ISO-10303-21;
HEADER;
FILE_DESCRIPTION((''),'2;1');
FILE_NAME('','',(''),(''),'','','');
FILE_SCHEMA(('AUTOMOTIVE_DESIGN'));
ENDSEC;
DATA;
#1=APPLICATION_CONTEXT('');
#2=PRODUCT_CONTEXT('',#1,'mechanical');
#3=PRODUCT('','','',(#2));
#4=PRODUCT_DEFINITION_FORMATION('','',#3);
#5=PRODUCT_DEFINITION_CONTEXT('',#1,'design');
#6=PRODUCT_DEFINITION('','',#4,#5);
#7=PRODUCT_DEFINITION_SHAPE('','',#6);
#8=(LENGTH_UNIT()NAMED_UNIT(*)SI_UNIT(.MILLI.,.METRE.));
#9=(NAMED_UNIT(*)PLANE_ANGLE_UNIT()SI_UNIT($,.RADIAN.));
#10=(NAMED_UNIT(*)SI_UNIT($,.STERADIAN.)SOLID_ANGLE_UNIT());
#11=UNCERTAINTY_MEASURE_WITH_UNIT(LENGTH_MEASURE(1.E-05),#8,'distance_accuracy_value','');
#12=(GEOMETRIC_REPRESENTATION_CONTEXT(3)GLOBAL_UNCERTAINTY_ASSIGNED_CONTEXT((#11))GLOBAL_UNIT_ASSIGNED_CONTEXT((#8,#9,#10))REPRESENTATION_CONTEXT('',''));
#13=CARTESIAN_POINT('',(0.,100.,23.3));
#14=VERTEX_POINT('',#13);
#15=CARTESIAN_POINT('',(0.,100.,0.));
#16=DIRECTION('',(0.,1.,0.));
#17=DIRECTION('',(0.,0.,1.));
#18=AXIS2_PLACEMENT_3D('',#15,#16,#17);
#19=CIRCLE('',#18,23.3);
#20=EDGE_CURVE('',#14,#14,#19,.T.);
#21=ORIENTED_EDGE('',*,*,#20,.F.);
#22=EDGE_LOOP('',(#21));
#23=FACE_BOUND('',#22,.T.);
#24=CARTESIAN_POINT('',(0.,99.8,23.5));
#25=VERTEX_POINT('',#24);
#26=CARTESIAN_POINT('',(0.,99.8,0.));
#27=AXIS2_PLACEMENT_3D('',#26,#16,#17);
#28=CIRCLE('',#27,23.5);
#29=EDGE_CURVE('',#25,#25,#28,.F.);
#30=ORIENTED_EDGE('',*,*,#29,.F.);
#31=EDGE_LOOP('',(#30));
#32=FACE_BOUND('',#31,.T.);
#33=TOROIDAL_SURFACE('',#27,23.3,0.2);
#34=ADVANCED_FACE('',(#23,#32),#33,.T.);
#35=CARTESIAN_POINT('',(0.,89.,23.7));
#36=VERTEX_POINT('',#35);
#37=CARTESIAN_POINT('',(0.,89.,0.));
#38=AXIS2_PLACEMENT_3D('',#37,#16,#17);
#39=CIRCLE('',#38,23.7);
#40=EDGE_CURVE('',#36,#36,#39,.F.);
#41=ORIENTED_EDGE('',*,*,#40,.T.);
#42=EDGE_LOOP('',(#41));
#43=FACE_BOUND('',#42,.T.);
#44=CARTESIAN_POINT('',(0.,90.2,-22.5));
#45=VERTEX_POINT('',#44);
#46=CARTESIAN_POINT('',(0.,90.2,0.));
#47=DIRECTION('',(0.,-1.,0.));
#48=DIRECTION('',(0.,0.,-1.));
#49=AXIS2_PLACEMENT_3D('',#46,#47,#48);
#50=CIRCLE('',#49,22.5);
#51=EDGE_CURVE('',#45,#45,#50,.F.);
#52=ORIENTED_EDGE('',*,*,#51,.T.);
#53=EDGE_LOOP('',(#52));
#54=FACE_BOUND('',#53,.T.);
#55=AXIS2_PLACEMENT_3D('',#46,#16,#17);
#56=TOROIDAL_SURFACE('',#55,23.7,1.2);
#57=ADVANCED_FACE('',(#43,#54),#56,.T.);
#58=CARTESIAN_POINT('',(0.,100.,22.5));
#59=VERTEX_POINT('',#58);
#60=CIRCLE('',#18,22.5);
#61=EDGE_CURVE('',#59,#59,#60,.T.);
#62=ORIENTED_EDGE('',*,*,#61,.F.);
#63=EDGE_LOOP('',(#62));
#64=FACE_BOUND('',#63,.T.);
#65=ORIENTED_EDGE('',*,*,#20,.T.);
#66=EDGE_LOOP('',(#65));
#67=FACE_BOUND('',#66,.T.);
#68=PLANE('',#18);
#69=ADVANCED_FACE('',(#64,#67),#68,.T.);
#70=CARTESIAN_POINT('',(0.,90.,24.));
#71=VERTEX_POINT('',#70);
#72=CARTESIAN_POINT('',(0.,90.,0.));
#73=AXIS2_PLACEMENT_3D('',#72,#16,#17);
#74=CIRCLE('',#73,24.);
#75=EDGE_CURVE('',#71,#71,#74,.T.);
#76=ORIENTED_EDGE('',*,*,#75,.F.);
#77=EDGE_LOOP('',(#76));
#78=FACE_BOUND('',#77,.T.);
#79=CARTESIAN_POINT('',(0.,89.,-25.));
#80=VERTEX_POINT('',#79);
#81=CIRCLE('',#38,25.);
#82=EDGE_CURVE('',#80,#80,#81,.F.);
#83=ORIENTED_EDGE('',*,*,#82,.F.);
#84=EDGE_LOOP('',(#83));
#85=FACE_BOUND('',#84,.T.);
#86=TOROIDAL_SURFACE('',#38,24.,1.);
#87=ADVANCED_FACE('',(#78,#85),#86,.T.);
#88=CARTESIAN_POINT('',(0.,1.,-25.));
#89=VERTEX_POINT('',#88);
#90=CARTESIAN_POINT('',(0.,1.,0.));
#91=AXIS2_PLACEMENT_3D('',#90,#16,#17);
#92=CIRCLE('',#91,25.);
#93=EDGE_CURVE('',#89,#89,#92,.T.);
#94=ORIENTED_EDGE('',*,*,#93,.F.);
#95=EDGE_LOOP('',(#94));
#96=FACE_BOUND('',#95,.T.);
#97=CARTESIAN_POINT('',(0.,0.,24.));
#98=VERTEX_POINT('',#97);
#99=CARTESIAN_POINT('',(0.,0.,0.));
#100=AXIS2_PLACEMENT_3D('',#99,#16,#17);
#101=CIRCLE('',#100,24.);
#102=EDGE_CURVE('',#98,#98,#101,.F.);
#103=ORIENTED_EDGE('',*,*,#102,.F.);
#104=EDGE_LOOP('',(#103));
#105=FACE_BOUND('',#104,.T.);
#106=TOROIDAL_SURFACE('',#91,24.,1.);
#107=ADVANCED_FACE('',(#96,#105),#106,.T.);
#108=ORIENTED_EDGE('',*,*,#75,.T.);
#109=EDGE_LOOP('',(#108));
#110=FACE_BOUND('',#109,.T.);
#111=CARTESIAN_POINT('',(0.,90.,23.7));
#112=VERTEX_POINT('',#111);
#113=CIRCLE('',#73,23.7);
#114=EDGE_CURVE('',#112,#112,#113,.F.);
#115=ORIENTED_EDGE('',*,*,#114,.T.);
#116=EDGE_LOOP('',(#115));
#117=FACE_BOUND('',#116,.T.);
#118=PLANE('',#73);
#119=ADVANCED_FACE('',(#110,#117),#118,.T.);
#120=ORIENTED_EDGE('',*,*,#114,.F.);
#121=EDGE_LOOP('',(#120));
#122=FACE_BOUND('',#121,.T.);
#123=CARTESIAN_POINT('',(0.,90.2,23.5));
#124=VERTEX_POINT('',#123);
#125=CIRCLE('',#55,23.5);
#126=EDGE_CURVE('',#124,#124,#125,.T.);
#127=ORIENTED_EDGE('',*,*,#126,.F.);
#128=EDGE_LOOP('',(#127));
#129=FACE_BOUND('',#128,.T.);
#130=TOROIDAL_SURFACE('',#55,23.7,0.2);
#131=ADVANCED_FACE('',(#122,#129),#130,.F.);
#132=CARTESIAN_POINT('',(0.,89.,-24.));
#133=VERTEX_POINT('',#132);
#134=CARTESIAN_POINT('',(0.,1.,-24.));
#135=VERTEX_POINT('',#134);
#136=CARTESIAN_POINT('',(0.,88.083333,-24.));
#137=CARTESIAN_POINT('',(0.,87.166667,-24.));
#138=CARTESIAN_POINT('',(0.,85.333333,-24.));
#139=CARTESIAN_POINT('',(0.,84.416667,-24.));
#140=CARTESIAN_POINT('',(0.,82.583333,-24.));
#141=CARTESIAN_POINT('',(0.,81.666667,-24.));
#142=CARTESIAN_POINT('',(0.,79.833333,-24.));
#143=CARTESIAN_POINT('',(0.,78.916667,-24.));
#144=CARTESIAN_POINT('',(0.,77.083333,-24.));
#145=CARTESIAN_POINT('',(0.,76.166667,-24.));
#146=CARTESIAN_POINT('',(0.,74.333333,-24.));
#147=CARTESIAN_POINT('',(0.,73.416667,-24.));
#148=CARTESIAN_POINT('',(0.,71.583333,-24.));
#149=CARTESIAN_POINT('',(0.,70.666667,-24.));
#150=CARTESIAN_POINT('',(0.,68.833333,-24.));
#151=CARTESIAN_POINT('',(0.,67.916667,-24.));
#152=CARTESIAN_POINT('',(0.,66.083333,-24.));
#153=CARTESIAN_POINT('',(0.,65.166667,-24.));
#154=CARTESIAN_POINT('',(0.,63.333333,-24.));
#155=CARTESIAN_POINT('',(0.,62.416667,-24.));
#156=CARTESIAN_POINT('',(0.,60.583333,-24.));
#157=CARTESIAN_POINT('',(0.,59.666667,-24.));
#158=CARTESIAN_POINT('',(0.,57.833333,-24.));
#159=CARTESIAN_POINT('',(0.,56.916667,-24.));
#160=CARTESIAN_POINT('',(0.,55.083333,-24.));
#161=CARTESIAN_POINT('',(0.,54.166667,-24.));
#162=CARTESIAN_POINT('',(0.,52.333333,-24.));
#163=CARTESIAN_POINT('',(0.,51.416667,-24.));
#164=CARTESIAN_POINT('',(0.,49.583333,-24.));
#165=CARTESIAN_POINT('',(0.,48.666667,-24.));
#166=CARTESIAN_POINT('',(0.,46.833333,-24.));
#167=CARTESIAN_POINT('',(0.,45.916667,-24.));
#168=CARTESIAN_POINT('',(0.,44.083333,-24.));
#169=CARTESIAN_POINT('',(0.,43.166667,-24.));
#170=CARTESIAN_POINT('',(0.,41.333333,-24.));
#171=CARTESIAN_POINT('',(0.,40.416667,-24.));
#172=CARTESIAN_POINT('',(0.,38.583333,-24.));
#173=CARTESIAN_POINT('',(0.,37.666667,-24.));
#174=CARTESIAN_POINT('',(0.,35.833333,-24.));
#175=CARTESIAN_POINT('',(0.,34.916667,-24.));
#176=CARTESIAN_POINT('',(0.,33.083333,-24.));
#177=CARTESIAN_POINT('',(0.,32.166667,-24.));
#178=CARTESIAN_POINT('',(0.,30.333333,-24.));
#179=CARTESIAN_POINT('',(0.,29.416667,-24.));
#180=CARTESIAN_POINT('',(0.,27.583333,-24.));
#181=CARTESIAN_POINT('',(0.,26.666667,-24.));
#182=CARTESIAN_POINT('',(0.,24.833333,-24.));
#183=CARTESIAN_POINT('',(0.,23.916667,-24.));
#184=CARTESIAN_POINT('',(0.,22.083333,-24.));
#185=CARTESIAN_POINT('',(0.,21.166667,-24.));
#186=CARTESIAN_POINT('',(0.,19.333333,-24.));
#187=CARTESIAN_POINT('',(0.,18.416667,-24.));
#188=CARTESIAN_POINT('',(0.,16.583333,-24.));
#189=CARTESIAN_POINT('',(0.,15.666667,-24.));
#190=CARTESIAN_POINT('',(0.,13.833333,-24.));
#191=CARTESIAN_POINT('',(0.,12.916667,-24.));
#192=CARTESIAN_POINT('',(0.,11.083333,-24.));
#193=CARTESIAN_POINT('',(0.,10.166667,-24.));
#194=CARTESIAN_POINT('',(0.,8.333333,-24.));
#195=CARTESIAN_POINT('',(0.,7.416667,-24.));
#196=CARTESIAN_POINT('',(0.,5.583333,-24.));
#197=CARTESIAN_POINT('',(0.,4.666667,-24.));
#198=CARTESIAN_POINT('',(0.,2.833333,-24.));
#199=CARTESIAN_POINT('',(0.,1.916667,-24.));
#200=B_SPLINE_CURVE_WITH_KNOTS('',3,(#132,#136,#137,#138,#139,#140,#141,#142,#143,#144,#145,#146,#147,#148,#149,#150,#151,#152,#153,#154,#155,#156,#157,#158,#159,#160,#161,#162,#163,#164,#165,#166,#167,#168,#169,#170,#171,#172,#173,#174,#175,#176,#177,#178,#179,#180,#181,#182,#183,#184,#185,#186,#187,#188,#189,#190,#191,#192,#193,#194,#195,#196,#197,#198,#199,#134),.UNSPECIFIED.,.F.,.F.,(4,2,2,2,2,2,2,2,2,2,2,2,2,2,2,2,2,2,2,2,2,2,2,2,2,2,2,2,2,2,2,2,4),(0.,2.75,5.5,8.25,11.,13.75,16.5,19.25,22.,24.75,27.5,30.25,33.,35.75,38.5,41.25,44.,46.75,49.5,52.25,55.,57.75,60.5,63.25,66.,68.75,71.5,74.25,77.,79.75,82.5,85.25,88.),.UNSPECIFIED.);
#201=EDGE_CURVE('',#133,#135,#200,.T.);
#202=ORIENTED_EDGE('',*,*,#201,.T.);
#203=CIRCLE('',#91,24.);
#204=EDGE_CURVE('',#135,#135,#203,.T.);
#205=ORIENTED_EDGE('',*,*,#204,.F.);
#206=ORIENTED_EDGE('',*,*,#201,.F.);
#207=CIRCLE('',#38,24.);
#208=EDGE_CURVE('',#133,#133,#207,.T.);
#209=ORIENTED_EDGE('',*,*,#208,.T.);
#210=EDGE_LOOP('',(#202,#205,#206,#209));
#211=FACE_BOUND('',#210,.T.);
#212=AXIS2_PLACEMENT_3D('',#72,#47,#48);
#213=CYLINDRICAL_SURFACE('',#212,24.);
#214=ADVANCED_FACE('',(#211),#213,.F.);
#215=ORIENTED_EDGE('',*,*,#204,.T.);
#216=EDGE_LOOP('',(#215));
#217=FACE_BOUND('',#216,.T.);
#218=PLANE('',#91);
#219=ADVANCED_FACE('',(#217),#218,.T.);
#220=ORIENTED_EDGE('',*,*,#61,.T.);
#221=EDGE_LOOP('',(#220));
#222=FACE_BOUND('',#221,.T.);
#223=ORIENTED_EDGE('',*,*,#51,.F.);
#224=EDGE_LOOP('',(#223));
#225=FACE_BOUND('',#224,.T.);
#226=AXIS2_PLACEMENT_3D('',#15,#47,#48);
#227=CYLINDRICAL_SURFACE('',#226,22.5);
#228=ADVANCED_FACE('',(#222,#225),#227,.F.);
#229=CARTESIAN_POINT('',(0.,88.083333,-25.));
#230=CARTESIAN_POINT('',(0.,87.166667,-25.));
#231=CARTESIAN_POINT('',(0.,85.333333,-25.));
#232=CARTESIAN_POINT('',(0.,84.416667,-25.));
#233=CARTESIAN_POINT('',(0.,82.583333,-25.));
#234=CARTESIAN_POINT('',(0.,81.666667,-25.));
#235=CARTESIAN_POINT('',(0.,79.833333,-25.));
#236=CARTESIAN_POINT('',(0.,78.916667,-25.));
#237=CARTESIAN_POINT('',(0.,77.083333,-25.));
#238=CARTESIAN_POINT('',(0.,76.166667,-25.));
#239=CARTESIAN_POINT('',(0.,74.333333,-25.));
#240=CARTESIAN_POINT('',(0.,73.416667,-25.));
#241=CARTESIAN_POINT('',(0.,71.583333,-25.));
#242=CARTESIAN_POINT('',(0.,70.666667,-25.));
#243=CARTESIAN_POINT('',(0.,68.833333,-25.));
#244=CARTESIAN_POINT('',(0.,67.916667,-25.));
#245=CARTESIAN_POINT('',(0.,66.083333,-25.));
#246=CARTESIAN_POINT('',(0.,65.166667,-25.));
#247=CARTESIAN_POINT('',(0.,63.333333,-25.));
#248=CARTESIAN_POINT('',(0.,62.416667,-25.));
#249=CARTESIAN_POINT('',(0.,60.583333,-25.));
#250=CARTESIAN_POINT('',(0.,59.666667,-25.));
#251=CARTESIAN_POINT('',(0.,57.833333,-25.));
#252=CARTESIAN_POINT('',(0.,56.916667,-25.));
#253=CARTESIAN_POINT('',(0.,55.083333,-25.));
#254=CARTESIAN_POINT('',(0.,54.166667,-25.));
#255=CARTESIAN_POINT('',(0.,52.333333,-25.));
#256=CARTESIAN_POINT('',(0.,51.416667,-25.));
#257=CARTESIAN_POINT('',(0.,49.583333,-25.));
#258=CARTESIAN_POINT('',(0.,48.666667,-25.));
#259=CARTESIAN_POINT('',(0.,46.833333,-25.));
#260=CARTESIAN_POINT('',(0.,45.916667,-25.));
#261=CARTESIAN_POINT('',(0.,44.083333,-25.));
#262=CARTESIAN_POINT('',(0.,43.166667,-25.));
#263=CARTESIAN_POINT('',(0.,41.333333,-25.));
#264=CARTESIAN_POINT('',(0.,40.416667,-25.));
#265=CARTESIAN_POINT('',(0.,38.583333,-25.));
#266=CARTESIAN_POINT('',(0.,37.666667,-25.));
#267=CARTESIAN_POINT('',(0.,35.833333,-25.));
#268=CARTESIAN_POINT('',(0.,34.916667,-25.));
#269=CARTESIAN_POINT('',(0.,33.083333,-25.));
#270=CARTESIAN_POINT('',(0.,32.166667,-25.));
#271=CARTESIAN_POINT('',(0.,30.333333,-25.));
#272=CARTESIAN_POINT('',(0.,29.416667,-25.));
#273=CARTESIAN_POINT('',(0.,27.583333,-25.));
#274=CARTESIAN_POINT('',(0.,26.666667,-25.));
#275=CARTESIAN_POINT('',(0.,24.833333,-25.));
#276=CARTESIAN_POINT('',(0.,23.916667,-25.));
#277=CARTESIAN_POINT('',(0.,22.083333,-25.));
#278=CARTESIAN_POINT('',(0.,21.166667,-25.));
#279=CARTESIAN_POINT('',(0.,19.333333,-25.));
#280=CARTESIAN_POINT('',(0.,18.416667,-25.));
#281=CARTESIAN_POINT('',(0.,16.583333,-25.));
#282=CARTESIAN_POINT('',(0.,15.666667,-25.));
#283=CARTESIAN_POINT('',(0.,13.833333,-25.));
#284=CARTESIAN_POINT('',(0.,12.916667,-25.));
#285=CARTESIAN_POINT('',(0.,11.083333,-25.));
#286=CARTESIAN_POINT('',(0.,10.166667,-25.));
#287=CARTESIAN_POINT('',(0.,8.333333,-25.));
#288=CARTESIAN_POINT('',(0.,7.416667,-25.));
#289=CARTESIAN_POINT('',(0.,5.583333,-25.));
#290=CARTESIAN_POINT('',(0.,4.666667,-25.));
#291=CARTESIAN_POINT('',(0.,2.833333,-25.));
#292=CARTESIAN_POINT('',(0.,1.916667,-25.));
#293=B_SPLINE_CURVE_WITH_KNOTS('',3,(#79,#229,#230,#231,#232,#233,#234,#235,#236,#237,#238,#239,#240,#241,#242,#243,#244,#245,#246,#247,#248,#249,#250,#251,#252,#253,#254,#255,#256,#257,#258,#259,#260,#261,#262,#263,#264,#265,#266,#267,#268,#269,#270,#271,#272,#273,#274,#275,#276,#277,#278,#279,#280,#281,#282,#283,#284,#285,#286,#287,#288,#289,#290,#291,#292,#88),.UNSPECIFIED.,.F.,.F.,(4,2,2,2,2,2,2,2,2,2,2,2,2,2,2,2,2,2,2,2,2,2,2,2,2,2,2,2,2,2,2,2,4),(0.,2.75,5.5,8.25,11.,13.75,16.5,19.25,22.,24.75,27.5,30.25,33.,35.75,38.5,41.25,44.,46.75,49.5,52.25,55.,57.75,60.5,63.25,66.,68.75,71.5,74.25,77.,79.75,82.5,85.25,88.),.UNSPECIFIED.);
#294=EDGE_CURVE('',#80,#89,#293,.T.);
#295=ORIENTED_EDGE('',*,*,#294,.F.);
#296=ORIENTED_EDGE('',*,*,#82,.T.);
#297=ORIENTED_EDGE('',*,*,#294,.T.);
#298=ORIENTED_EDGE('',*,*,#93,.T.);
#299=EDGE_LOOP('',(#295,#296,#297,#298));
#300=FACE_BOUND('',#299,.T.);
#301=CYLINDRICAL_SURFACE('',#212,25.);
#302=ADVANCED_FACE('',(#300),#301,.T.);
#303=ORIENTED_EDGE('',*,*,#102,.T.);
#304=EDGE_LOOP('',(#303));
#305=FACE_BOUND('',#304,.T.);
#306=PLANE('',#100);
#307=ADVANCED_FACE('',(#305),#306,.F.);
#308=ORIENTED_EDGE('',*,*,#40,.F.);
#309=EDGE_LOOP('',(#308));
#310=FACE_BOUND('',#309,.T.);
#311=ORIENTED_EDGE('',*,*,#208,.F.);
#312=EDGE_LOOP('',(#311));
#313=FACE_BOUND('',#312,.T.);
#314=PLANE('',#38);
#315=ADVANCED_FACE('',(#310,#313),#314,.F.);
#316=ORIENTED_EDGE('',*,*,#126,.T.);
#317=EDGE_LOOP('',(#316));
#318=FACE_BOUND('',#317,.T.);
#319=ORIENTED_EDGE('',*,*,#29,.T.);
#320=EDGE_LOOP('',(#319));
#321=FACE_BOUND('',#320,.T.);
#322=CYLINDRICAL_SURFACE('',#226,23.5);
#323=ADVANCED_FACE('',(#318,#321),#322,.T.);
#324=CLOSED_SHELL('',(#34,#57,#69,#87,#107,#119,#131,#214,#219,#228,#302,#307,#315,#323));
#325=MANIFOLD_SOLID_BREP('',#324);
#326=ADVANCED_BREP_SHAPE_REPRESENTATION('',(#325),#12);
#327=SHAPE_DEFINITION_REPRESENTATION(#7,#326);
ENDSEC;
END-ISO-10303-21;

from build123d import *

# Parameters (mm, degrees)
SKETCH1_R           = 25
BOSS_EXTRUDE1_DEPTH = 90
SKETCH2_R           = 23.5
BOSS_EXTRUDE2_DEPTH = 10
FILLET1_R           = 1
FILLET2_R           = 0.2


# Read off the part's stored shape, not the designer's step: Shell1
with BuildPart() as part:
    # Sketch1 → Boss-Extrude1 (new body)
    with BuildSketch(Plane(origin=(0, 0, 0), x_dir=(1, 0, 0), z_dir=(0, 1, 0))):
        with Locations(Location((0, 0, 0), (0, 0, 90))):
            Circle(SKETCH1_R)
    extrude(amount=BOSS_EXTRUDE1_DEPTH)

    # Sketch2 → Boss-Extrude2 (add)
    with BuildSketch(Plane(origin=(0, 90, 0), x_dir=(1, 0, 0), z_dir=(0, 1, 0))):
        with Locations(Location((0, 0, 0), (0, 0, 270))):
            Circle(SKETCH2_R)
    extrude(amount=BOSS_EXTRUDE2_DEPTH)

    # Fillet1
    fillet1_edges = [part.edges().sort_by_distance(p)[0] for p in [
        (0, 0, 25),
        (0, 90, 25),
    ]]
    fillet(fillet1_edges, radius=FILLET1_R)

    # Fillet2
    fillet2_edges = [part.edges().sort_by_distance(p)[0] for p in [
        (0, 90, -23.5),
        (0, 100, -23.5),
    ]]
    fillet(fillet2_edges, radius=FILLET2_R)

    # Shell1 outline → Shell1 (revolve, cut)
    with BuildSketch(Plane.XY):
        with BuildLine():
            Line((24, 1), (24, 89))
            Line((24, 89), (23.7, 89))
            ThreePointArc((23.7, 89), (22.851471863, 89.351471863), (22.5, 90.2))
            Line((22.5, 90.2), (22.5, 100))
            Line((22.5, 100), (0, 100))
            Line((0, 100), (0, 1))
            Line((0, 1), (24, 1))
        make_face()
    revolve(axis=Axis((0, 0, 0), (0, 1, 0)), mode=Mode.SUBTRACT)


solid = part.part
